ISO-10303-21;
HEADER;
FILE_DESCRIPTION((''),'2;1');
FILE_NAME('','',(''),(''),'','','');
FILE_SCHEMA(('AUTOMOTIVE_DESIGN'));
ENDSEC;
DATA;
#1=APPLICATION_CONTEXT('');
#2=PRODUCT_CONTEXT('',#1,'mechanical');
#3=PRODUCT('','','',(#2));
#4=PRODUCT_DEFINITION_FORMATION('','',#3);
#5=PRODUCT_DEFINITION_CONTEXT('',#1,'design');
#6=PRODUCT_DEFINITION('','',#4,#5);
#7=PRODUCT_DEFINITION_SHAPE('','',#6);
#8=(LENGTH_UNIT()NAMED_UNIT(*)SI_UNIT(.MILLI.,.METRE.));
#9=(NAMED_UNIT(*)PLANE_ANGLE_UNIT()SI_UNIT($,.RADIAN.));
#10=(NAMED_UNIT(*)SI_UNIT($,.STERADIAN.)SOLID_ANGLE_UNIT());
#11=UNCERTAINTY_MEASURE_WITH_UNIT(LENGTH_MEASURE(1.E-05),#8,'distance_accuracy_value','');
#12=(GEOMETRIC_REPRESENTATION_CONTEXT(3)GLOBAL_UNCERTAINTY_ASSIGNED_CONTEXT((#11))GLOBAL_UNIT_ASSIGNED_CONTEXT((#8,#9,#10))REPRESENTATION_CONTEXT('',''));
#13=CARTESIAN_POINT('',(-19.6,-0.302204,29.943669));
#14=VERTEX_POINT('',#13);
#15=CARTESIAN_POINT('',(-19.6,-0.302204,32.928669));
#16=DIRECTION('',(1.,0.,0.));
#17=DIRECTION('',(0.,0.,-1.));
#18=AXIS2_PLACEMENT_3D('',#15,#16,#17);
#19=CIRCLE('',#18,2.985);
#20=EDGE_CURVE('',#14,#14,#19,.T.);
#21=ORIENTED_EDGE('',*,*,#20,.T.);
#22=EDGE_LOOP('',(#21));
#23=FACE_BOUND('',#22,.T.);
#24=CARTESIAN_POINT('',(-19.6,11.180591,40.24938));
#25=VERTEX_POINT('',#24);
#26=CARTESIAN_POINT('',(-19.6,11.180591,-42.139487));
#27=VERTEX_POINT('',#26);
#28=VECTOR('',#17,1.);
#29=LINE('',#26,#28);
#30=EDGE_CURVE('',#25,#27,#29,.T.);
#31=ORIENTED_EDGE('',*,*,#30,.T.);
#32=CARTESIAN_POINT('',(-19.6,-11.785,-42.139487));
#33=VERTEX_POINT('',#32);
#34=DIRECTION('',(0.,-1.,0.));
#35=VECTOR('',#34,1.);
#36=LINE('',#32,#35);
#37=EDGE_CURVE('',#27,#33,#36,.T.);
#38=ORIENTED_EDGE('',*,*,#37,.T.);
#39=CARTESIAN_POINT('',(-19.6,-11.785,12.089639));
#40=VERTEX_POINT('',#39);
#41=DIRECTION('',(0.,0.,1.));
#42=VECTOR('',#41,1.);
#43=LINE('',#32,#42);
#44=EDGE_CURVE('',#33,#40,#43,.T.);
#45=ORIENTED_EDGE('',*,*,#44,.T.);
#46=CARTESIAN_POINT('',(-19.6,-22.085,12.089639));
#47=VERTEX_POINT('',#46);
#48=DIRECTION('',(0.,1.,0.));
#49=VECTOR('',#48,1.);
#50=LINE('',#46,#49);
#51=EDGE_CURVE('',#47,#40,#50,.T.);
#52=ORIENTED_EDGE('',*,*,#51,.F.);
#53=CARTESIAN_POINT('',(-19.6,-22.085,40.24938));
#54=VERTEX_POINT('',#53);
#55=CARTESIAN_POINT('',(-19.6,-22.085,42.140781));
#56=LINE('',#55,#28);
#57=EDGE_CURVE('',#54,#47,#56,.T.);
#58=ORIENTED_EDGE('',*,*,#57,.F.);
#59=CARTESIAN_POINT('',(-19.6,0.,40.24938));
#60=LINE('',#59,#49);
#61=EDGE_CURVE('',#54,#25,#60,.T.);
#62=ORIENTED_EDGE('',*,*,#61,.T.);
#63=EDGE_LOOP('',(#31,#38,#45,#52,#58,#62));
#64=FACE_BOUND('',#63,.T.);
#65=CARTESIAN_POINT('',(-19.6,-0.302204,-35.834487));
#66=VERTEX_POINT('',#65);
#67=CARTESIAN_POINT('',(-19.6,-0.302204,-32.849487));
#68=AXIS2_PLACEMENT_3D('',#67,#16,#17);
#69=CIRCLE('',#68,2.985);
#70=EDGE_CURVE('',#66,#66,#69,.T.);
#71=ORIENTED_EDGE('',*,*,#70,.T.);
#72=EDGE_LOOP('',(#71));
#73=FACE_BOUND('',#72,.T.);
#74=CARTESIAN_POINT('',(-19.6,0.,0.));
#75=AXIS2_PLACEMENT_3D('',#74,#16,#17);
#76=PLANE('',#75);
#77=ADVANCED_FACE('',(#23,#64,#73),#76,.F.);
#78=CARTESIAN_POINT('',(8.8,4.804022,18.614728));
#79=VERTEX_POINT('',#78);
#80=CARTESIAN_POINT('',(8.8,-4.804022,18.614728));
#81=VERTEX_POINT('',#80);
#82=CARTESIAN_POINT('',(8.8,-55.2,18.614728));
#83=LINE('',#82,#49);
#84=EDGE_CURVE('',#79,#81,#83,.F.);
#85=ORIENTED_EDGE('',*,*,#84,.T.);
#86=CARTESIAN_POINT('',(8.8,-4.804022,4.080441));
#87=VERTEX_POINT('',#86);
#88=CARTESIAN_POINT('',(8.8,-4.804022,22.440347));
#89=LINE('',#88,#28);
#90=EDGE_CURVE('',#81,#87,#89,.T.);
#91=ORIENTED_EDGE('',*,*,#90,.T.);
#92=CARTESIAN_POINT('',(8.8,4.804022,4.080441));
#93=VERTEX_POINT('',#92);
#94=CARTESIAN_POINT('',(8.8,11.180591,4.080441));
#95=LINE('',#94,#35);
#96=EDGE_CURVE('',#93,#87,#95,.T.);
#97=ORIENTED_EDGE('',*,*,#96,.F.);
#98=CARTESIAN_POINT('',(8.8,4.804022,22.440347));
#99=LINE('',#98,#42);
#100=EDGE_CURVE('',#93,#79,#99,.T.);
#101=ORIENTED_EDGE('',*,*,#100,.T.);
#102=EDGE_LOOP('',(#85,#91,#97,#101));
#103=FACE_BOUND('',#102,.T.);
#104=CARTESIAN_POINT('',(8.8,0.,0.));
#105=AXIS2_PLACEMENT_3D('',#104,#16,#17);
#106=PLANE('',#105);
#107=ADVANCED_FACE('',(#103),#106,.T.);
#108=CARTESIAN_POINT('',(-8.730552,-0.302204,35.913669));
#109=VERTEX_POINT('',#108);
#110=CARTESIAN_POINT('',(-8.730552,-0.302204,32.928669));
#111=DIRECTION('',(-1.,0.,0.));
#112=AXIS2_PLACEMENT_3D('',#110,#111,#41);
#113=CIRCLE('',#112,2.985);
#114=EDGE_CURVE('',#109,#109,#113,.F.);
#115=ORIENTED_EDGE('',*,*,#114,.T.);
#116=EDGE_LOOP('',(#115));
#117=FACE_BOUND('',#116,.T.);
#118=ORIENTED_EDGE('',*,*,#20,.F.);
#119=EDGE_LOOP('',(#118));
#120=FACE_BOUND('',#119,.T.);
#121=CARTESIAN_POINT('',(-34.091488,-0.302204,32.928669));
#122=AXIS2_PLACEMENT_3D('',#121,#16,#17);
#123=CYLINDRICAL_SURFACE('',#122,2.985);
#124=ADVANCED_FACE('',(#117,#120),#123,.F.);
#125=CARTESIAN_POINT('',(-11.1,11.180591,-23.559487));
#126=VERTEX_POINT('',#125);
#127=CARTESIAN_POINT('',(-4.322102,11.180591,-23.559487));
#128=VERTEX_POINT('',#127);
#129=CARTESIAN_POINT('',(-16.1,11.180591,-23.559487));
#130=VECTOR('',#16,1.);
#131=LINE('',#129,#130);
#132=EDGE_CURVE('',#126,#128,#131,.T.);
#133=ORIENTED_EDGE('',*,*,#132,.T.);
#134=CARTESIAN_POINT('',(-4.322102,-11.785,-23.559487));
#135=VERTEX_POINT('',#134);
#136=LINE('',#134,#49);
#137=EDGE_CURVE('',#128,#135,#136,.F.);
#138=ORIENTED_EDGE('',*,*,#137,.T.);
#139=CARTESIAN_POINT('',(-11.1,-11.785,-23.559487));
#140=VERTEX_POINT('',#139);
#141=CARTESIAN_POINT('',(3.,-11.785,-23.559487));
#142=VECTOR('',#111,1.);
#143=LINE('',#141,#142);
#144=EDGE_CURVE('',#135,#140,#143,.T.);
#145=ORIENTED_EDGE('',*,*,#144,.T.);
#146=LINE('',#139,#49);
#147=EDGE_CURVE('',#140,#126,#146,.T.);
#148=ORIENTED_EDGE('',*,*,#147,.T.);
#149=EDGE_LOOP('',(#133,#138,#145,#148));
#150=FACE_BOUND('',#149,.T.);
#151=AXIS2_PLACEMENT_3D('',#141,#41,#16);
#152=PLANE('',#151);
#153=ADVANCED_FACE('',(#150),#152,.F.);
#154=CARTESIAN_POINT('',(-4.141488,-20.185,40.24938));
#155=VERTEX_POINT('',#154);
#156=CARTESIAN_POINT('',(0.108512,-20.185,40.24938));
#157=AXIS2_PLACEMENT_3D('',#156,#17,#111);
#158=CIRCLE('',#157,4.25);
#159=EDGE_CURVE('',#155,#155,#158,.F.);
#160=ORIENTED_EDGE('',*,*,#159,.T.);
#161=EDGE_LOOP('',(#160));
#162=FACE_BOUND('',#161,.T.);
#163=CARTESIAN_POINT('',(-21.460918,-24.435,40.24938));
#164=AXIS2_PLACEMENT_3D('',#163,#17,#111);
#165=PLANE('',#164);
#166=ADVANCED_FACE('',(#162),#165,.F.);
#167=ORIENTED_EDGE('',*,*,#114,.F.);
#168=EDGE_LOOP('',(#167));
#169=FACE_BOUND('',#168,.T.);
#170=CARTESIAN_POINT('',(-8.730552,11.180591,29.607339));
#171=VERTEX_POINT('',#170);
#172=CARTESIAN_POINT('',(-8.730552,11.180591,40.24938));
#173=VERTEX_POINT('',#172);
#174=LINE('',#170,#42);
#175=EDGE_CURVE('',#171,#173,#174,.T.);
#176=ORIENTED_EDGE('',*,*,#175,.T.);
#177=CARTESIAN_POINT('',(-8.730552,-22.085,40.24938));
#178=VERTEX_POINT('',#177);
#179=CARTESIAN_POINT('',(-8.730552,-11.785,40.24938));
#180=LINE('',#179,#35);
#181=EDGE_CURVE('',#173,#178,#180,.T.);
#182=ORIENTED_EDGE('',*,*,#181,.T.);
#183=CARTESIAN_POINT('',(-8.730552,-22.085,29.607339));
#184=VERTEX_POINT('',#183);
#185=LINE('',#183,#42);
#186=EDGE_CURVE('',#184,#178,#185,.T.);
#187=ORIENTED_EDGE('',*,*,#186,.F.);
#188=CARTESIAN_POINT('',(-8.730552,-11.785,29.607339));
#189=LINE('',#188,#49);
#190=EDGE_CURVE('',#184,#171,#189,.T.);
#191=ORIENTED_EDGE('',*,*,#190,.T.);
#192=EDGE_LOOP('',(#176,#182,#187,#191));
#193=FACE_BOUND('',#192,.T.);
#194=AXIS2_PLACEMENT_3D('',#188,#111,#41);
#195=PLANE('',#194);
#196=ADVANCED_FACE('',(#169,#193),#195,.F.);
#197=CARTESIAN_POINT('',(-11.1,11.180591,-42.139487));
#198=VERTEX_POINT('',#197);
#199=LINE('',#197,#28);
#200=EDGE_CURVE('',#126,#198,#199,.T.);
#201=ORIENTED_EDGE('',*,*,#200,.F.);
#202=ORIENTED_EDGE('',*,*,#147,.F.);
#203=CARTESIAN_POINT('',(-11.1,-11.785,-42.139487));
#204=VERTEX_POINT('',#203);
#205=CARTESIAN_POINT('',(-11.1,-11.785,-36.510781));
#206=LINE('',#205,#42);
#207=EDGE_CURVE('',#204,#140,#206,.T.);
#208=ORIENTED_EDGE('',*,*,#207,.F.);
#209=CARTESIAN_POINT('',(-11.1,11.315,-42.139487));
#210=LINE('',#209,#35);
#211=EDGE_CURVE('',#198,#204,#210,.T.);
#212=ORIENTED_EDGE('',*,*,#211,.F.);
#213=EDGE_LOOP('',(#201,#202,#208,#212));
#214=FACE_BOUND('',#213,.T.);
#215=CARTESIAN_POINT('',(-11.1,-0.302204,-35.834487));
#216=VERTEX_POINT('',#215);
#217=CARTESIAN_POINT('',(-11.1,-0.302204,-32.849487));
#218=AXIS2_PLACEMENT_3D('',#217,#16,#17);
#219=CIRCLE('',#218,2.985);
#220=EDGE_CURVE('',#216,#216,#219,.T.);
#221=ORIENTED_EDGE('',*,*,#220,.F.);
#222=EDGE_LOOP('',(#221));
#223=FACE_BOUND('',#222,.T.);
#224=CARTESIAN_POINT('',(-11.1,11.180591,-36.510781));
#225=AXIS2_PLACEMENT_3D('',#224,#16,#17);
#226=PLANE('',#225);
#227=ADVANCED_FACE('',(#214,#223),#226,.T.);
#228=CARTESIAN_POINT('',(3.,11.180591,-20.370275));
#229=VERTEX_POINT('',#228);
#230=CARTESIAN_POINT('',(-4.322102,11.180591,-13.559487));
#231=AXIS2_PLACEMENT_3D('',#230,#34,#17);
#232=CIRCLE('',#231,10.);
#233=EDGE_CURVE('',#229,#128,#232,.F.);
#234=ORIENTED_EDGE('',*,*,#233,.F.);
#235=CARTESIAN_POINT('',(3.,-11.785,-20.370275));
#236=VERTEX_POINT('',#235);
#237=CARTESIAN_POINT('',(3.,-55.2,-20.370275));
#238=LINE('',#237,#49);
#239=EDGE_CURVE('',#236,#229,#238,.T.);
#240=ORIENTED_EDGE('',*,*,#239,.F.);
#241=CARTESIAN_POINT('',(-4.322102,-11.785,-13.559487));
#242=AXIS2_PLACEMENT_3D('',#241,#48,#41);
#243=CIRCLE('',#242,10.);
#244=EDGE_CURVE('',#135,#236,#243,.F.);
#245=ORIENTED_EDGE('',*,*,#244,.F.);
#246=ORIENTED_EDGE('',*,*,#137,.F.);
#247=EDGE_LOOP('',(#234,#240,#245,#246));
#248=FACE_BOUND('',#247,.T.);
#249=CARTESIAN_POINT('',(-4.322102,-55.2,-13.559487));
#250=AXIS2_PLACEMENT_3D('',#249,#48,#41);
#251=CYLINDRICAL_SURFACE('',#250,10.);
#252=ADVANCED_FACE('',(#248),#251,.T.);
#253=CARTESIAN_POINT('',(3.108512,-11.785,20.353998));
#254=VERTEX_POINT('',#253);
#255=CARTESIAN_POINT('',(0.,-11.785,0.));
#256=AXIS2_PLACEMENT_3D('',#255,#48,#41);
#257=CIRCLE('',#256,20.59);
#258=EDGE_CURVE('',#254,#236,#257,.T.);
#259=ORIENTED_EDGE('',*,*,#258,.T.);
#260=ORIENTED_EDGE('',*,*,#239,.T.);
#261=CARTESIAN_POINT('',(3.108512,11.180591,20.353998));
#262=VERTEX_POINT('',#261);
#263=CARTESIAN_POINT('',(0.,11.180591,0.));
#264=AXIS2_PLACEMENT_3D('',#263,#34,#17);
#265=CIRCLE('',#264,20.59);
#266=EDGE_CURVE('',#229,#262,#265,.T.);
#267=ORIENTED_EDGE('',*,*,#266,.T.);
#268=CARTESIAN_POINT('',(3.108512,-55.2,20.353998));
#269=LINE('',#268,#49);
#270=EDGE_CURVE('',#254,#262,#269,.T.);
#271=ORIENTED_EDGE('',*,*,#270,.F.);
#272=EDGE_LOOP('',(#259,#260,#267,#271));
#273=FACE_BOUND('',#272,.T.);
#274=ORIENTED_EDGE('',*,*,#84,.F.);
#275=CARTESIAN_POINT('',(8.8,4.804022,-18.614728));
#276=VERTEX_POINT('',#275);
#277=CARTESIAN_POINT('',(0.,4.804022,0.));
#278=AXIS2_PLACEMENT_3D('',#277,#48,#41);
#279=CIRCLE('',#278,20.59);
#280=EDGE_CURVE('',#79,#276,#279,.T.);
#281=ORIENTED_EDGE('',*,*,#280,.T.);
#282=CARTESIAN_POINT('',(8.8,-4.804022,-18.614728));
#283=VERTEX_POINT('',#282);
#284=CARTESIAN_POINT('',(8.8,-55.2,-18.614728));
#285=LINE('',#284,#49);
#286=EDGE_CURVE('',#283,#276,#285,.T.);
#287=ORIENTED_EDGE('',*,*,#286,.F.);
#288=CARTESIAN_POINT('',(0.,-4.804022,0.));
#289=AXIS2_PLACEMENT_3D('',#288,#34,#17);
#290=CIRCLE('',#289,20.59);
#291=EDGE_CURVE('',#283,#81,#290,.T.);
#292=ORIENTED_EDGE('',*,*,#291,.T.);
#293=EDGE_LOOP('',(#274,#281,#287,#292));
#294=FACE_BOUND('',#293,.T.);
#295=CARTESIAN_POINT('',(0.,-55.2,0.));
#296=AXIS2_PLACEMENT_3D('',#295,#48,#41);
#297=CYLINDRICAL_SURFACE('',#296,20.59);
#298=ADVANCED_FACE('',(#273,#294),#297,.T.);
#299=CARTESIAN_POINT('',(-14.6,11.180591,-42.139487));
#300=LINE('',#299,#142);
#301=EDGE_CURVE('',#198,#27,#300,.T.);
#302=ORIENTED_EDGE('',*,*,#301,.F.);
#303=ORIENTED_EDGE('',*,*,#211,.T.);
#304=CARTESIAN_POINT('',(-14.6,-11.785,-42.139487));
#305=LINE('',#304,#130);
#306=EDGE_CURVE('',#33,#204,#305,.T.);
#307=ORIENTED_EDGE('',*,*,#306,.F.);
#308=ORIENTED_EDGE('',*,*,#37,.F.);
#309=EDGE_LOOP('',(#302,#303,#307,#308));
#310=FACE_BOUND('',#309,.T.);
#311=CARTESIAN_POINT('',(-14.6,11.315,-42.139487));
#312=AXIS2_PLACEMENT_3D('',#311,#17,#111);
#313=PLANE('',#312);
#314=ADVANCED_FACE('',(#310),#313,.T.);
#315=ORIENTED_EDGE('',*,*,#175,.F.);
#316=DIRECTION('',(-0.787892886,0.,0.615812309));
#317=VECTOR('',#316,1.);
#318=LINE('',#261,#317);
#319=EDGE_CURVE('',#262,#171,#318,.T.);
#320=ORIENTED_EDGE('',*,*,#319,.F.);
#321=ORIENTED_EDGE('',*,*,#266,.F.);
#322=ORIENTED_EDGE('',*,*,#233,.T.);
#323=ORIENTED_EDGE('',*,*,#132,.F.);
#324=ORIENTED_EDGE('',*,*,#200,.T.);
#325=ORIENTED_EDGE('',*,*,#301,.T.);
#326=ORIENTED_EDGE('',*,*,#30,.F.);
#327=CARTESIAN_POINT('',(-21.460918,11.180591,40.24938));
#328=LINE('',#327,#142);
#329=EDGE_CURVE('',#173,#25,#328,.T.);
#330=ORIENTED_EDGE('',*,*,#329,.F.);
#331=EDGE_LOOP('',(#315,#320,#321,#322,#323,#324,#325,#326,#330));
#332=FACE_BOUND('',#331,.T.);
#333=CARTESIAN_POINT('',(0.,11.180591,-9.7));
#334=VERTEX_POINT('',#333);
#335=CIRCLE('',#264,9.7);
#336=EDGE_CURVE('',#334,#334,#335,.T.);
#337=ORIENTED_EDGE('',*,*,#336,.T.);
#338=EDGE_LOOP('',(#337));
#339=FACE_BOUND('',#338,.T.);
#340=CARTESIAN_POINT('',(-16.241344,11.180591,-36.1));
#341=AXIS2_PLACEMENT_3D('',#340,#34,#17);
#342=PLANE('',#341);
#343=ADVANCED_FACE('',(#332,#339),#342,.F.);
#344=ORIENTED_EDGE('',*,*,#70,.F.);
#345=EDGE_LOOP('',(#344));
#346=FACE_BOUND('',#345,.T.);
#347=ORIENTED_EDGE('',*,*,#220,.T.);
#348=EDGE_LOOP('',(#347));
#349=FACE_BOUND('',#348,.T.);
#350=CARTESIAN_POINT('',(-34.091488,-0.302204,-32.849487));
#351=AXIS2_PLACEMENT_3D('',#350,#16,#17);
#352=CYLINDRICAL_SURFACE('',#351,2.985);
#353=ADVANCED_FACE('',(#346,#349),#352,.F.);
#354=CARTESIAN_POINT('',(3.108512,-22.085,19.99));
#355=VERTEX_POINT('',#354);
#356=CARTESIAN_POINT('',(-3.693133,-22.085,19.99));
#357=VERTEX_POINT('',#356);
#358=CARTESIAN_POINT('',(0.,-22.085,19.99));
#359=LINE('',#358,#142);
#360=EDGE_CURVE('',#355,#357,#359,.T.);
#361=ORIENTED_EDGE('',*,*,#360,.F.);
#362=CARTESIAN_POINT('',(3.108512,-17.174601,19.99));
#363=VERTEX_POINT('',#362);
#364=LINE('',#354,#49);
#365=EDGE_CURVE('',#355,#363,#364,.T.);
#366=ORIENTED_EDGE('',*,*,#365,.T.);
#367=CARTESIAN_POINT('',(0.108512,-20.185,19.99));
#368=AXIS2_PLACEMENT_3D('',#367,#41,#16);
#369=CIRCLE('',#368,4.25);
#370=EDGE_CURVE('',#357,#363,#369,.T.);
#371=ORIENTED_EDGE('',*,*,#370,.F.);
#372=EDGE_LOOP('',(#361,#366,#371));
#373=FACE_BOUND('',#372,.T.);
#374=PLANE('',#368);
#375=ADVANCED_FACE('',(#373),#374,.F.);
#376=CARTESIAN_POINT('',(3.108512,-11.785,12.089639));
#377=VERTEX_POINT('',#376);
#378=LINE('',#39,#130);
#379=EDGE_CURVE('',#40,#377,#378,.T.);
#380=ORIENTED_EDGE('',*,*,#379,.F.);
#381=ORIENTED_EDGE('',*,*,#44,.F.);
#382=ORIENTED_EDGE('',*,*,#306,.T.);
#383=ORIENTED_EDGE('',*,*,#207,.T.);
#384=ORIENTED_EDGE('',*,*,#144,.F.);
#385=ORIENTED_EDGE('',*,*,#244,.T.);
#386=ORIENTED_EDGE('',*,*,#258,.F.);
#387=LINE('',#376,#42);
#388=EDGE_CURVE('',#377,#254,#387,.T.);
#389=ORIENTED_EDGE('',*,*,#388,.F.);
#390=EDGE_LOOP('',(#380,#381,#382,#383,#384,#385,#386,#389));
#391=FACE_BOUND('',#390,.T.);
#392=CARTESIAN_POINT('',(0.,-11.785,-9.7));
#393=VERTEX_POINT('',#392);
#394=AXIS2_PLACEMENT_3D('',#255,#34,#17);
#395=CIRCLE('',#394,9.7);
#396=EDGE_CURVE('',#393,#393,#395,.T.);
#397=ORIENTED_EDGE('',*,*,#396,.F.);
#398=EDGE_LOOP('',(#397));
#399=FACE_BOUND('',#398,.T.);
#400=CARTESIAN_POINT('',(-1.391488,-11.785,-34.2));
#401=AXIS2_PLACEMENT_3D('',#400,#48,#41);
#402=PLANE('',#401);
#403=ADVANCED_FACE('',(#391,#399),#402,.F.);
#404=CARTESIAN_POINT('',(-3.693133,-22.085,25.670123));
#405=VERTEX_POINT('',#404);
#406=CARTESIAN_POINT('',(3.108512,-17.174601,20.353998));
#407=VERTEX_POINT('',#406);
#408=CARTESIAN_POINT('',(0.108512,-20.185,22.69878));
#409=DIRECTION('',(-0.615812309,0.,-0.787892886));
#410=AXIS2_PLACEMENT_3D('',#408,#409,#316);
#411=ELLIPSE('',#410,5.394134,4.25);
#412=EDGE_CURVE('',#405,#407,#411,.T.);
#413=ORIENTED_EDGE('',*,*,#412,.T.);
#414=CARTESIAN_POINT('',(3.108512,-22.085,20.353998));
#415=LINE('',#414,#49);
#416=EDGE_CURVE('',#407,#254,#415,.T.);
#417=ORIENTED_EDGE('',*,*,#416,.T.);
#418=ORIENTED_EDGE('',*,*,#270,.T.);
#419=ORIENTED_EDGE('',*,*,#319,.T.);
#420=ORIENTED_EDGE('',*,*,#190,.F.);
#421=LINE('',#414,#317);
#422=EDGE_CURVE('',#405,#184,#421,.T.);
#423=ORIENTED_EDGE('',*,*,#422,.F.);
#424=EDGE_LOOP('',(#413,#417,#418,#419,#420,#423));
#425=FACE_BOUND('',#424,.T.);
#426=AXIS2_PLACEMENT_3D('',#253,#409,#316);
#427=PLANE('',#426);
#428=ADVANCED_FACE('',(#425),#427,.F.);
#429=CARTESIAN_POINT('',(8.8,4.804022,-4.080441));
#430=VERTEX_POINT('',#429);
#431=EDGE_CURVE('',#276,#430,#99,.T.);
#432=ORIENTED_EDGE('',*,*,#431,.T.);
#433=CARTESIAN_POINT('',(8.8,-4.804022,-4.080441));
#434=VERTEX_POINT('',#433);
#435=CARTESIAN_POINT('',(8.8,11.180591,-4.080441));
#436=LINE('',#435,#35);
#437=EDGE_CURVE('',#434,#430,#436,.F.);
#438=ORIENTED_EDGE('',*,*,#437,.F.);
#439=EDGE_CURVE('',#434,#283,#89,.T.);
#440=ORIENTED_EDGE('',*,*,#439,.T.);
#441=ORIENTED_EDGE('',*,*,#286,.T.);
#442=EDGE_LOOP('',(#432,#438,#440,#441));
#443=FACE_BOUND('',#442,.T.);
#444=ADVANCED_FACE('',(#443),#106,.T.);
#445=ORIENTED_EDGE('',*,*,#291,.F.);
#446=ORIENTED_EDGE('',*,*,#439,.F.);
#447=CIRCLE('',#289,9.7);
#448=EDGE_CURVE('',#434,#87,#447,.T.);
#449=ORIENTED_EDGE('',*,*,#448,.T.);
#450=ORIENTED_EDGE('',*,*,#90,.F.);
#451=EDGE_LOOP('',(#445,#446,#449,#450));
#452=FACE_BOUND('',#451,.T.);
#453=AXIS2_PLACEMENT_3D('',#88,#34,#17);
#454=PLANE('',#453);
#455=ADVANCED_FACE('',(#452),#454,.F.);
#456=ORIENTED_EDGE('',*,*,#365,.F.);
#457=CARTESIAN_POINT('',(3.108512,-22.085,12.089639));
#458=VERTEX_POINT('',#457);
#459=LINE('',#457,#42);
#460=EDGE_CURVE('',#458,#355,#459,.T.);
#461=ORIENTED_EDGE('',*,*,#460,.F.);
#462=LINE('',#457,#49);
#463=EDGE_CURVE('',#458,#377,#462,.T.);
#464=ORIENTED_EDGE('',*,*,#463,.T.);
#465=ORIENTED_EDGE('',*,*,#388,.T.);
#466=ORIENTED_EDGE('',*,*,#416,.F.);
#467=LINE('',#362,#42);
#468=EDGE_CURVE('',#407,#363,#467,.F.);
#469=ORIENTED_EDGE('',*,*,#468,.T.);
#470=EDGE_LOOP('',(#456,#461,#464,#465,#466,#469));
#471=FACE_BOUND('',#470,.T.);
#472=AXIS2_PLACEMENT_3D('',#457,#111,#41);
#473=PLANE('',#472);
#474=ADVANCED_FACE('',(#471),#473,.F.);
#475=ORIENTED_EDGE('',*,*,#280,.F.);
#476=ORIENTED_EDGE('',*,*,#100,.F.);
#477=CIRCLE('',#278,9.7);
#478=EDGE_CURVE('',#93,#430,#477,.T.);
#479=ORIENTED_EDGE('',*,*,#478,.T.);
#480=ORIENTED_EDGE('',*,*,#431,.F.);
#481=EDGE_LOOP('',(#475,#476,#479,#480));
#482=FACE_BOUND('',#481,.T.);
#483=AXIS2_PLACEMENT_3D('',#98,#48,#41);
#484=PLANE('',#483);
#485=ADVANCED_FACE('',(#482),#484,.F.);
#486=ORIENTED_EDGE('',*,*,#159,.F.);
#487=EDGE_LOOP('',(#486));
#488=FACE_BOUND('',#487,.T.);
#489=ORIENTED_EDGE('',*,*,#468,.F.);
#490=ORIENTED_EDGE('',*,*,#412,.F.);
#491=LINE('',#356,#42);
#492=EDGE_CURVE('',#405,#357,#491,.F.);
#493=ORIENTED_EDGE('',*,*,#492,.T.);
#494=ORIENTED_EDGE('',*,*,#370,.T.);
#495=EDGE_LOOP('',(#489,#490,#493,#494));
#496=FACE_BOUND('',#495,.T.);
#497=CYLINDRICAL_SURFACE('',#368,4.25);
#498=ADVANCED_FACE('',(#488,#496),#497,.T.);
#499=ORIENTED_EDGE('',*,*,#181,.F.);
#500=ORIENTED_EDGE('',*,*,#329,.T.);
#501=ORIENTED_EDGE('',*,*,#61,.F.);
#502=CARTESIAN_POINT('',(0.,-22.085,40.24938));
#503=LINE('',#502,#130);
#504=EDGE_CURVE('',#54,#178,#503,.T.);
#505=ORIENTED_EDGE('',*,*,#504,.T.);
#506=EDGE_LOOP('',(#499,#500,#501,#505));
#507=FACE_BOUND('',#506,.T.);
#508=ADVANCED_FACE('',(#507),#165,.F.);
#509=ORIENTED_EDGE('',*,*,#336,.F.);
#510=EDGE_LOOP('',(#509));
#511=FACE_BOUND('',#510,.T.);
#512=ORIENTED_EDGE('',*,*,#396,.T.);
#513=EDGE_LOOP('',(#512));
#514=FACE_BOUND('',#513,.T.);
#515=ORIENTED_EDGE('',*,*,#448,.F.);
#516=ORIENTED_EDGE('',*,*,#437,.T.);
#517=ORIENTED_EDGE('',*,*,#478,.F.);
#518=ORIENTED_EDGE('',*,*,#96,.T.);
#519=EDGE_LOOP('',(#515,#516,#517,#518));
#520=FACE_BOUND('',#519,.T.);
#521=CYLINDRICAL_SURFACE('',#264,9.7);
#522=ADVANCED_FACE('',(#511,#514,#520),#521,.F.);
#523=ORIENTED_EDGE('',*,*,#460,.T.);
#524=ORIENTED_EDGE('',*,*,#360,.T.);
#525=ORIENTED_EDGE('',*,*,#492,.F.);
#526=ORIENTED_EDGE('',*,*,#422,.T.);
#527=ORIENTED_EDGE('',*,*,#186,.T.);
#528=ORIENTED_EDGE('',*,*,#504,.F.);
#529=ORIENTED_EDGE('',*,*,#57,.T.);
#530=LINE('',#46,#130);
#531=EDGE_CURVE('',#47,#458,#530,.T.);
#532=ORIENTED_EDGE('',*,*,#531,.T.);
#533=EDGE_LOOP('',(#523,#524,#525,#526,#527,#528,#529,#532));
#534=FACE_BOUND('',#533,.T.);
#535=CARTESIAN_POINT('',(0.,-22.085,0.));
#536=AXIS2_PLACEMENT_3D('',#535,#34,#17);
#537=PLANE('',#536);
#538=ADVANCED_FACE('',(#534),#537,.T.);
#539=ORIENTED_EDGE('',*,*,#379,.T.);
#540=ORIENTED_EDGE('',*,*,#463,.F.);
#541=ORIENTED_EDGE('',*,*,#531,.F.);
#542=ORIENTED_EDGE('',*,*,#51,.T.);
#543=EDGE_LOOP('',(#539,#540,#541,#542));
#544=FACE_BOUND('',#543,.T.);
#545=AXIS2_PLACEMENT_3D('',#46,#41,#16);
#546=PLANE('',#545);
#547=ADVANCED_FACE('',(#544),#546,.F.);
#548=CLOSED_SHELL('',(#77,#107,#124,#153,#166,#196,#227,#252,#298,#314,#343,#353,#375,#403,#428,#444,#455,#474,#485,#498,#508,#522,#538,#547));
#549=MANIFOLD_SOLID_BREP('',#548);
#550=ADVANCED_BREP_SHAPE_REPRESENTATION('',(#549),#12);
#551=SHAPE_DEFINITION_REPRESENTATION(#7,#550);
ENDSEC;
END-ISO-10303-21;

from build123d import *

# Parameters (mm, degrees)
SKETCH_1_R                = 20.68
SKETCH_1_R_2              = 9.68
EXTRUDE_1_DEPTH           = 116.68
SKETCH_11_W               = 27
SKETCH_11_H               = 150
CUT_EXTRUDE_3_DEPTH       = 40
SKETCH_13_W               = 10
SKETCH_13_H               = 128.345013401
CUT_EXTRUDE_7_DEPTH       = 126.614916312
SKETCH_15_W               = 8
SKETCH_15_H               = 68.68
CUT_EXTRUDE_9_DEPTH       = 48
SKETCH_16_W               = 15.549431524
SKETCH_16_H               = 20
SKETCH_16_W_2             = 15.459431524
EXTRUDE_4_DEPTH           = 19.2
SKETCH_17_W               = 19.20851187
SKETCH_17_H               = 14.03
CUT_EXTRUDE_10_DEPTH      = 20.2
SKETCH_18_R               = 9.59
CUT_EXTRUDE_11_DEPTH      = 121.289430957
SKETCH_21_R               = 2.985
CUT_EXTRUDE_12_DEPTH      = 55.2
EXTRUDE_START             = 55.2
SKETCH_24_R               = 20.59
SKETCH_24_R_2             = 9.59
EXTRUDE_2_DEPTH           = 55.2
CUT_EXTRUDE_13_DEPTH      = 55.2
SKETCH_26_W               = 10.00851187
SKETCH_26_H               = 41.68
CUT_EXTRUDE_15_DEPTH      = 55.2
SKETCH_27_W               = 10
SKETCH_27_H               = 40
CUT_EXTRUDE_16_DEPTH      = 55.2
SKETCH_28_W               = 44.880694938
SKETCH_28_H               = 9.608044066
CUT_EXTRUDE_17_DEPTH      = 12.2
SKETCH_35_W               = 13.53
SKETCH_35_H               = 20
EXTRUDE_10_DEPTH          = 15
EXTRUDE_11_DEPTH          = 15
SKETCH_37_W               = 9
SKETCH_37_H               = 20
EXTRUDE_12_DEPTH          = 20
SKETCH_38_W               = 9
SKETCH_38_H               = 20
EXTRUDE_13_DEPTH          = 20
SKETCH_42_R               = 2.985
CUT_EXTRUDE_21_DEPTH      = 20
CUT_EXTRUDE_23_DEPTH      = 138.235841092
SKETCH_45_W               = 3
SKETCH_45_H               = 20
EXTRUDE_14_DEPTH          = 30
SKETCH_46_W               = 3
SKETCH_46_H               = 20
EXTRUDE_15_DEPTH          = 30
SKETCH_47_W               = 33.078221107
SKETCH_47_H               = 20
EXTRUDE_16_DEPTH          = 50
SKETCH_48_W               = 30
SKETCH_48_H               = 20
EXTRUDE_17_DEPTH          = 50
SKETCH_50_W               = 50
SKETCH_50_H               = 20
EXTRUDE_18_DEPTH          = 1
SKETCH_51_W               = 50
SKETCH_51_H               = 20
EXTRUDE_19_DEPTH          = 1
SKETCH_52_W               = 53
SKETCH_52_H               = 14
CUT_EXTRUDE_24_DEPTH      = 151.972575738
SKETCH_53_W               = 53
SKETCH_53_H               = 14
CUT_EXTRUDE_25_DEPTH      = 151.942387436
SKETCH_54_W               = 40
SKETCH_54_H               = 73.27
CUT_EXTRUDE_26_DEPTH      = 147.866192927
SKETCH_56_W               = 13.00851187
SKETCH_56_H               = 20
EXTRUDE_21_DEPTH          = 3.08
SKETCH_60_W               = 6.504255935
SKETCH_60_H               = 76.35
CUT_EXTRUDE_30_DEPTH      = 137.106994034
CUT_EXTRUDE_32_DEPTH      = 20
SKETCH_64_W               = 16.20851187
SKETCH_64_H               = 0.09
EXTRUDE_22_DEPTH          = 20
SKETCH_65_W               = 3.495744065
SKETCH_65_H               = 3.26
CUT_EXTRUDE_33_DEPTH      = 137.057988464
SKETCH_66_W               = 3.495744065
SKETCH_66_H               = 1.776778893
SKETCH_66_W_2             = 3.503635083
SKETCH_66_H_2             = 1.775
EXTRUDE_23_DEPTH          = 20.2
SKETCH_68_W               = 6.504255935
SKETCH_68_H               = 3.66
CUT_EXTRUDE_34_DEPTH      = 20
SKETCH_69_R               = 2.985
CUT_EXTRUDE_35_DEPTH      = 126.598983893
SKETCH_70_R               = 2.985
CUT_EXTRUDE_36_DEPTH      = 132.360728238
SKETCH_71_W               = 38.005321573
SKETCH_71_H               = 111.965885132
CUT_EXTRUDE_37_DEPTH      = 147.475577566
SKETCH_72_R               = 9.7
CUT_EXTRUDE_38_DEPTH      = 38.185254838
CUT_EXTRUDE_START         = -22
SKETCH_77_R               = 30.59
SKETCH_77_R_2             = 20.59
CUT_EXTRUDE_2_DEPTH       = 22
SKETCH_78_W               = 34.816185151
SKETCH_78_H               = 22.96559116
EXTRUDE_26_DEPTH          = 0.1
SKETCH_80_W               = 2.900031179
SKETCH_80_H               = 6.148706656
EXTRUDE_28_DEPTH          = 23.1
SKETCH_81_W               = 6.148706656
SKETCH_81_H               = 23.1
EXTRUDE_29_DEPTH          = 14.1
SKETCH_82_W               = 6.148706656
SKETCH_82_H               = 0.13440884
CUT_EXTRUDE_39_DEPTH      = 19.1
SKETCH_83_W               = 2.900031179
SKETCH_83_H               = 22.96559116
EXTRUDE_30_DEPTH          = 19.1
FILLET_1_R                = 10
SKETCH_84_W               = 3.5
SKETCH_84_H               = 19.1
EXTRUDE_31_DEPTH          = 23.1
SKETCH_85_W               = 3.5
SKETCH_85_H               = 0.52
CUT_EXTRUDE_40_DEPTH      = 48.860163141
SKETCH_86_W               = 3.5
SKETCH_86_H               = 22.96559116
EXTRUDE_32_DEPTH          = 62.1
SKETCH_87_W               = 3.60851187
SKETCH_87_H               = 34.816185151
CUT_EXTRUDE_41_DEPTH      = 62.1
SKETCH_89_W               = 0.10851187
SKETCH_89_H               = 6.15
EXTRUDE_33_DEPTH          = 23.1
EXTRUDE_34_DEPTH          = 22.1
SKETCH_91_W               = 0.971561636
SKETCH_91_H               = 22.96559116
CUT_EXTRUDE_42_DEPTH      = 22.1
SKETCH_95_W               = 6.15
SKETCH_95_H               = 22.96559116
EXTRUDE_35_DEPTH          = 14.1
FILLET_2_R                = 10
SKETCH_96_W               = 3.60851187
SKETCH_96_H               = 2.548438364
CUT_EXTRUDE_43_DEPTH      = 55.35700885
SKETCH_97_W               = 3.5
SKETCH_97_H               = 6.148706656
EXTRUDE_36_DEPTH          = 23.1
CUT_EXTRUDE_44_DEPTH      = 23.1
SKETCH_99_W               = 6.15
SKETCH_99_H               = 0.13440884
CUT_EXTRUDE_45_DEPTH      = 23.1
SKETCH_101_R              = 2.985
CUT_EXTRUDE_46_DEPTH      = 23.1
SKETCH_103_W              = 3.60851187
SKETCH_103_H              = 0.54
CUT_EXTRUDE_49_DEPTH      = 53.222714265
SKETCH_104_W              = 3.60851187
SKETCH_104_H              = 0.54
CUT_EXTRUDE_50_DEPTH      = 53.222714265
SKETCH_105_W              = 14.1
SKETCH_105_H              = 22.96559116
EXTRUDE_37_DEPTH          = 30
SKETCH_106_W              = 8.260608777
SKETCH_106_H              = 22.96559116
CUT_EXTRUDE_52_DEPTH      = 61.301547389
SKETCH_107_R              = 2.985
CUT_EXTRUDE_53_DEPTH      = 54.964080882
SKETCH_108_W              = 3.60851187
SKETCH_108_H              = 22.96559116
EXTRUDE_38_DEPTH          = 40
SKETCH_109_W              = 84.280268292
SKETCH_109_H              = 22.96559116
EXTRUDE_39_DEPTH          = 5
SKETCH_110_R              = 2.985
CUT_EXTRUDE_54_DEPTH      = 57.152183688
SKETCH_111_R              = 2.985
CUT_EXTRUDE_55_DEPTH      = 50.299169813
CUT_EXTRUDE_56_DEPTH      = 53.222714265
EXTRUDE_40_DEPTH          = 10.3
EXTRUDE_44_DEPTH          = 0.01
EXTRUDE_44_DEPTH_BACK     = 30.01
SKETCH_120_R              = 4.25
CUT_EXTRUDE_58_DEPTH      = 60.346587307
CUT_EXTRUDE_58_DEPTH_BACK = 60.346587307
SKETCH_121_W              = 49.202417837
SKETCH_121_H              = 14.707819526


with BuildPart() as part:
    # 草圖1 → 伸長-薄件1 (new body)
    with BuildSketch(Plane(origin=(0, 0, 0), x_dir=(1, 0, 0), z_dir=(0, 1, 0))):
        Circle(SKETCH_1_R)
        Circle(SKETCH_1_R_2, mode=Mode.SUBTRACT)
    extrude(amount=EXTRUDE_1_DEPTH)

    # 草圖11 → 除料-伸長3 (cut)
    with BuildSketch(Plane(origin=(0, 116.68, 0), x_dir=(1, 0, 0), z_dir=(0, 1, 0))):
        with Locations((21.70851187, -44.235815192)):
            Rectangle(SKETCH_11_W, SKETCH_11_H)
    extrude(amount=-CUT_EXTRUDE_3_DEPTH, mode=Mode.SUBTRACT)

    # 草圖13 → 除料-伸長7 (cut, through all)
    with BuildSketch(Plane.XY.offset(21)):
        with Locations((-16, 58.612182466)):
            Rectangle(SKETCH_13_W, SKETCH_13_H)
    extrude(amount=-CUT_EXTRUDE_7_DEPTH, mode=Mode.SUBTRACT)

    # 草圖15 → 除料-伸長9 (cut)
    with BuildSketch(Plane.XY.offset(21)):
        with Locations((-1.395744065, 52.34)):
            Rectangle(SKETCH_15_W, SKETCH_15_H)
    extrude(amount=-CUT_EXTRUDE_9_DEPTH, mode=Mode.SUBTRACT)

    # 草圖16 → 填料-伸長4 (add)
    with BuildSketch(Plane(origin=(8.20851187, 0, 0), x_dir=(0, 0, -1), z_dir=(1, 0, 0))):
        with Locations((12.905284238, 106.68)):
            Rectangle(SKETCH_16_W, SKETCH_16_H)
        with Locations((-12.860284238, 106.68)):
            Rectangle(SKETCH_16_W_2, SKETCH_16_H)
    extrude(amount=-EXTRUDE_4_DEPTH)

    # 草圖17 → 除料-伸長10 (cut)
    with BuildSketch(Plane(origin=(0, 116.68, 0), x_dir=(1, 0, 0), z_dir=(0, 1, 0))):
        with Locations((-1.395744065, -0.045)):
            Rectangle(SKETCH_17_W, SKETCH_17_H)
    extrude(amount=-CUT_EXTRUDE_10_DEPTH, mode=Mode.SUBTRACT)

    # 草圖18 → 除料-伸長11 (cut, through all)
    with BuildSketch(Plane.XZ):
        with Locations(Location((0, 0, 0), (0, 0, 90))):
            Circle(SKETCH_18_R)
    extrude(amount=-CUT_EXTRUDE_11_DEPTH, mode=Mode.SUBTRACT)

    # 草圖21 → 除料-伸長12 (cut)
    with BuildSketch(Plane(origin=(0, 0, -20.68), x_dir=(-1, 0, 0), z_dir=(0, 0, -1))):
        with Locations((1.39148813, 108.73)):
            Circle(SKETCH_21_R)
    extrude(amount=-CUT_EXTRUDE_12_DEPTH, mode=Mode.SUBTRACT)

    # 草圖24 → 伸長-薄件2 (add)
    with BuildSketch(Plane.XZ.offset(EXTRUDE_START)):
        Circle(SKETCH_24_R)
        Circle(SKETCH_24_R_2, mode=Mode.SUBTRACT)
    extrude(amount=-EXTRUDE_2_DEPTH)

    # 草圖25 → 除料-伸長13 (cut)
    with BuildSketch(Plane.XY.offset(21)):
        Polygon((-1.39148813, -11.785), (22.612379708, -11.785), (22.612379708, -63.873337429), (-22.749525245, -63.873337429), (-22.749525245, -11.785), align=None)
    extrude(amount=-CUT_EXTRUDE_13_DEPTH, mode=Mode.SUBTRACT)

    # 草圖26 → 除料-伸長15 (cut)
    with BuildSketch(Plane(origin=(0, 0, 0), x_dir=(1, 0, 0), z_dir=(0, 1, 0))):
        with Locations((-15.995744065, -0.16)):
            Rectangle(SKETCH_26_W, SKETCH_26_H)
    extrude(amount=-CUT_EXTRUDE_15_DEPTH, mode=Mode.SUBTRACT)

    # 草圖27 → 除料-伸長16 (cut)
    with BuildSketch(Plane(origin=(21, 0, 0), x_dir=(0, 0, -1), z_dir=(1, 0, 0))):
        with Locations((0, 41.68)):
            Rectangle(SKETCH_27_W, SKETCH_27_H)
    extrude(amount=-CUT_EXTRUDE_16_DEPTH, mode=Mode.SUBTRACT)

    # 草圖28 → 除料-伸長17 (cut)
    with BuildSketch(Plane(origin=(21, 0, 0), x_dir=(0, 0, -1), z_dir=(1, 0, 0))):
        Rectangle(SKETCH_28_W, SKETCH_28_H)
    extrude(amount=-CUT_EXTRUDE_17_DEPTH, mode=Mode.SUBTRACT)

    # 草圖35 → 填料-伸長10 (add)
    with BuildSketch(Plane.ZY.offset(10.99148813)):
        with Locations((13.825, 106.68)):
            Rectangle(SKETCH_35_W, SKETCH_35_H)
    extrude(amount=EXTRUDE_10_DEPTH)

    # 草圖36 → 填料-伸長11 (add)
    with BuildSketch(Plane.ZY.offset(10.99148813)):
        Polygon((-20.68, 116.68), (-6.97, 116.68), (-6.97, 96.48), (-20.68, 96.68), align=None)
    extrude(amount=EXTRUDE_11_DEPTH)

    # 草圖37 → 填料-伸長12 (add)
    with BuildSketch(Plane.XY.offset(20.59)):
        with Locations((-21.49148813, 106.68)):
            Rectangle(SKETCH_37_W, SKETCH_37_H)
    extrude(amount=EXTRUDE_12_DEPTH)

    # 草圖38 → 填料-伸長13 (add)
    with BuildSketch(Plane(origin=(0, 0, -20.68), x_dir=(-1, 0, 0), z_dir=(0, 0, -1))):
        with Locations((21.49148813, 106.68)):
            Rectangle(SKETCH_38_W, SKETCH_38_H)
    extrude(amount=EXTRUDE_13_DEPTH)

    # 草圖42 → 除料-伸長21 (cut)
    with BuildSketch(Plane(origin=(-16.99148813, 0, 0), x_dir=(0, 0, -1), z_dir=(1, 0, 0))):
        with Locations((30.68, 106.554418142)):
            Circle(SKETCH_42_R)
        with Locations((-30.395640125, 106.68)):
            Circle(SKETCH_42_R)
    extrude(amount=-CUT_EXTRUDE_21_DEPTH, mode=Mode.SUBTRACT)

    # 草圖43 → 除料-伸長23 (cut, through all)
    with BuildSketch(Plane(origin=(0, 116.68, 0), x_dir=(1, 0, 0), z_dir=(0, 1, 0))):
        Polygon((-11, 6.97), (-10.99148813, 20.68), (-10.99148813, 48.096794253), (-28.274756234, 48.096794253), (-28.274756234, -43.270506289), (-11, -43.270506289), align=None)
    extrude(amount=-CUT_EXTRUDE_23_DEPTH, mode=Mode.SUBTRACT)

    # 草圖45 → 填料-伸長14 (add)
    with BuildSketch(Plane.XY.offset(20.59)):
        with Locations((-9.5, 106.68)):
            Rectangle(SKETCH_45_W, SKETCH_45_H)
    extrude(amount=EXTRUDE_14_DEPTH)

    # 草圖46 → 填料-伸長15 (add)
    with BuildSketch(Plane(origin=(0, 0, -20.68), x_dir=(-1, 0, 0), z_dir=(0, 0, -1))):
        with Locations((9.49148813, 106.68)):
            Rectangle(SKETCH_46_W, SKETCH_46_H)
    extrude(amount=EXTRUDE_15_DEPTH)

    # 草圖47 → 填料-伸長16 (add)
    with BuildSketch(Plane.ZY.offset(11)):
        with Locations((34.050889447, 106.68)):
            Rectangle(SKETCH_47_W, SKETCH_47_H)
    extrude(amount=EXTRUDE_16_DEPTH)

    # 草圖48 → 填料-伸長17 (add)
    with BuildSketch(Plane.ZY.offset(10.99148813)):
        with Locations((-35.68, 106.68)):
            Rectangle(SKETCH_48_W, SKETCH_48_H)
    extrude(amount=EXTRUDE_17_DEPTH)

    # 草圖50 → 填料-伸長18 (add)
    with BuildSketch(Plane(origin=(0, 0, 17.511778893), x_dir=(-1, 0, 0), z_dir=(0, 0, -1))):
        with Locations((36, 106.68)):
            Rectangle(SKETCH_50_W, SKETCH_50_H)
    extrude(amount=EXTRUDE_18_DEPTH)

    # 草圖51 → 填料-伸長19 (add)
    with BuildSketch(Plane.XY.offset(-20.68)):
        with Locations((-35.99148813, 106.68)):
            Rectangle(SKETCH_51_W, SKETCH_51_H)
    extrude(amount=EXTRUDE_19_DEPTH)

    # 草圖52 → 除料-伸長24 (cut, through all)
    with BuildSketch(Plane(origin=(0, 116.68, 0), x_dir=(1, 0, 0), z_dir=(0, 1, 0))):
        with Locations((-34.49148813, 43.68)):
            Rectangle(SKETCH_52_W, SKETCH_52_H)
    extrude(amount=-CUT_EXTRUDE_24_DEPTH, mode=Mode.SUBTRACT)

    # 草圖53 → 除料-伸長25 (cut, through all)
    with BuildSketch(Plane(origin=(0, 116.68, 0), x_dir=(1, 0, 0), z_dir=(0, 1, 0))):
        with Locations((-34.5, -43.59)):
            Rectangle(SKETCH_53_W, SKETCH_53_H)
    extrude(amount=-CUT_EXTRUDE_25_DEPTH, mode=Mode.SUBTRACT)

    # 草圖54 → 除料-伸長26 (cut, through all)
    with BuildSketch(Plane(origin=(0, 116.68, 0), x_dir=(1, 0, 0), z_dir=(0, 1, 0))):
        with Locations((-41, 0.045)):
            Rectangle(SKETCH_54_W, SKETCH_54_H)
    extrude(amount=-CUT_EXTRUDE_26_DEPTH, mode=Mode.SUBTRACT)

    # 草圖56 → 填料-伸長21 (add)
    with BuildSketch(Plane(origin=(0, 0, -36.68), x_dir=(-1, 0, 0), z_dir=(0, 0, -1))):
        with Locations((14.495744065, 106.68)):
            Rectangle(SKETCH_56_W, SKETCH_56_H)
    extrude(amount=EXTRUDE_21_DEPTH)

    # 草圖60 → 除料-伸長30 (cut, through all)
    with BuildSketch(Plane(origin=(0, 116.68, 0), x_dir=(1, 0, 0), z_dir=(0, 1, 0))):
        with Locations((-17.747872032, 1.585)):
            Rectangle(SKETCH_60_W, SKETCH_60_H)
    extrude(amount=-CUT_EXTRUDE_30_DEPTH, mode=Mode.SUBTRACT)

    # 草圖61 → 除料-伸長32 (cut)
    with BuildSketch(Plane(origin=(0, 116.68, 0), x_dir=(1, 0, 0), z_dir=(0, 1, 0))):
        Polygon((1.92725193, -20.59), (1.92725193, -22.399121663), (-2.174190472, -21.421542421), (-2.174190472, -20.59), align=None)
    extrude(amount=-CUT_EXTRUDE_32_DEPTH, mode=Mode.SUBTRACT)

    # 草圖64 → 填料-伸長22 (add)
    with BuildSketch(Plane(origin=(0, 116.68, 0), x_dir=(1, 0, 0), z_dir=(0, 1, 0))):
        with Locations((0.104255935, -20.635)):
            Rectangle(SKETCH_64_W, SKETCH_64_H)
    extrude(amount=-EXTRUDE_22_DEPTH)

    # 草圖65 → 除料-伸長33 (cut, through all)
    with BuildSketch(Plane(origin=(0, 116.68, 0), x_dir=(1, 0, 0), z_dir=(0, 1, 0))):
        with Locations((-12.747872033, -18.141778893)):
            Rectangle(SKETCH_65_W, SKETCH_65_H)
    extrude(amount=-CUT_EXTRUDE_33_DEPTH, mode=Mode.SUBTRACT)

    # 草圖66 → 填料-伸長23 (add)
    with BuildSketch(Plane(origin=(0, 96.48, 0), x_dir=(1, 0, 0), z_dir=(0, 1, 0))):
        with Locations((-12.747872033, -18.883389447)):
            Rectangle(SKETCH_66_W, SKETCH_66_H)
        with Locations((-12.743926524, 18.7925)):
            Rectangle(SKETCH_66_W_2, SKETCH_66_H_2)
    extrude(amount=EXTRUDE_23_DEPTH)

    # 草圖68 → 除料-伸長34 (cut)
    with BuildSketch(Plane(origin=(0, 116.68, 0), x_dir=(1, 0, 0), z_dir=(0, 1, 0))):
        with Locations((-11.243616098, 37.93)):
            Rectangle(SKETCH_68_W, SKETCH_68_H)
    extrude(amount=-CUT_EXTRUDE_34_DEPTH, mode=Mode.SUBTRACT)

    # 草圖69 → 除料-伸長35 (cut, through all)
    with BuildSketch(Plane(origin=(-7.99148813, 0, 0), x_dir=(0, 0, -1), z_dir=(1, 0, 0))):
        with Locations((28.39, 106.68)):
            Circle(SKETCH_69_R)
        with Locations((-28.635, 106.68)):
            Circle(SKETCH_69_R)
    extrude(amount=-CUT_EXTRUDE_35_DEPTH, mode=Mode.SUBTRACT)

    # 草圖70 → 除料-伸長36 (cut, through all)
    with BuildSketch(Plane(origin=(0, 0, 20.59), x_dir=(-1, 0, 0), z_dir=(0, 0, -1))):
        with Locations((1.39148813, 108.73)):
            Circle(SKETCH_70_R)
    extrude(amount=-CUT_EXTRUDE_36_DEPTH, mode=Mode.SUBTRACT)

    # 草圖71 → 除料-伸長37 (cut, through all)
    with BuildSketch(Plane.XY.offset(50)):
        with Locations((2.76131712, 67.163533726)):
            Rectangle(SKETCH_71_W, SKETCH_71_H)
    extrude(amount=-CUT_EXTRUDE_37_DEPTH, mode=Mode.SUBTRACT)

    # 草圖72 → 除料-伸長38 (cut, through all)
    with BuildSketch(Plane.XZ.offset(11.785)):
        with Locations(Location((0, 0, 0), (0, 0, 270))):
            Circle(SKETCH_72_R)
    extrude(amount=-CUT_EXTRUDE_38_DEPTH, mode=Mode.SUBTRACT)

    # 草圖77 → 除料-伸長-薄件2 (cut)
    with BuildSketch(Plane(origin=(0, 11.18059116, 0), x_dir=(1, 0, 0), z_dir=(0, 1, 0)).offset(CUT_EXTRUDE_START)):
        Circle(SKETCH_77_R)
        Circle(SKETCH_77_R_2, mode=Mode.SUBTRACT)
    extrude(amount=CUT_EXTRUDE_2_DEPTH, mode=Mode.SUBTRACT)

    # 草圖78 → 填料-伸長26 (add)
    with BuildSketch(Plane.ZY.offset(11)):
        with Locations((-0.002688243, -0.30220442)):
            Rectangle(SKETCH_78_W, SKETCH_78_H)
    extrude(amount=EXTRUDE_26_DEPTH)



with BuildPart() as body_2:
    # 草圖80 → 填料-伸長28 (new body)
    with BuildSketch(Plane.XZ.offset(11.785)):
        with Locations((-12.55001559, -20.485134146)):
            Rectangle(SKETCH_80_W, SKETCH_80_H)
    extrude(amount=-EXTRUDE_28_DEPTH)


with BuildPart() as part_1:
    add(part.part)

    add(body_2.part)  # 填料-伸長29 merges body 2
    # 草圖81 → 填料-伸長29 (add)
    with BuildSketch(Plane(origin=(-11.1, 0, 0), x_dir=(0, 0, -1), z_dir=(1, 0, 0))):
        with Locations((20.485134146, -0.235)):
            Rectangle(SKETCH_81_W, SKETCH_81_H)
    extrude(amount=EXTRUDE_29_DEPTH)

    # 草圖82 → 除料-伸長39 (cut)
    with BuildSketch(Plane(origin=(3, 0, 0), x_dir=(0, 0, -1), z_dir=(1, 0, 0))):
        with Locations((20.485134146, 11.24779558)):
            Rectangle(SKETCH_82_W, SKETCH_82_H)
    extrude(amount=-CUT_EXTRUDE_39_DEPTH, mode=Mode.SUBTRACT)

    # 草圖83 → 填料-伸長30 (add)
    with BuildSketch(Plane.XY.offset(-17.410780818)):
        with Locations((-12.55001559, -0.30220442)):
            Rectangle(SKETCH_83_W, SKETCH_83_H)
    extrude(amount=-EXTRUDE_30_DEPTH)

    # 圓角1
    # the kernel refuses this fillet: 10 mm, written as the material it takes off along each edge
    with BuildSketch(Plane(origin=(3, -30.090254449, -23.559487474), x_dir=(-1, 0, 0), z_dir=(0, 1, 0))) as fillet_1_piece_1:
        with BuildLine():
            CenterArc((7.32210178, 10), FILLET_1_R, 222.927997508, 47.072002492)
            Line((0, 3.189212562), (-0.146442036, 3.052996813))
            ThreePointArc((-0.146442036, 3.052996813), (-0.2, 1.594606281), (-0.2, 0))
            Line((-0.2, 0), (0, -0.2))
            Line((0, -0.2), (7.32210178, -0.2))
            Line((7.32210178, -0.2), (7.32210178, 0))
        make_face()
    extrude(amount=59.576100059, mode=Mode.SUBTRACT)

    # 草圖84 → 填料-伸長31 (add)
    with BuildSketch(Plane(origin=(0, -11.785, 0), x_dir=(-1, 0, 0), z_dir=(0, -1, 0))):
        with Locations((12.85, 26.960780818)):
            Rectangle(SKETCH_84_W, SKETCH_84_H)
    extrude(amount=-EXTRUDE_31_DEPTH)

    # 草圖85 → 除料-伸長40 (cut, through all)
    with BuildSketch(Plane.XZ.offset(11.785)):
        with Locations((-12.85, -36.250780818)):
            Rectangle(SKETCH_85_W, SKETCH_85_H)
    extrude(amount=-CUT_EXTRUDE_40_DEPTH, mode=Mode.SUBTRACT)

    # 草圖86 → 填料-伸長32 (add)
    with BuildSketch(Plane.XY.offset(-17.410780818)):
        with Locations((-12.85, -0.30220442)):
            Rectangle(SKETCH_86_W, SKETCH_86_H)
    extrude(amount=EXTRUDE_32_DEPTH)

    # 草圖87 → 除料-伸長41 (cut)
    with BuildSketch(Plane.XZ.offset(11.785)):
        with Locations((-12.795744065, -0.002688243)):
            Rectangle(SKETCH_87_W, SKETCH_87_H)
    extrude(amount=-CUT_EXTRUDE_41_DEPTH, mode=Mode.SUBTRACT)


with BuildPart() as cut_extrude_41_piece_1:
    # of the separate pieces the step leaves, piece 1, a body of its own (cut_extrude_41_pieces)
    add(part_1.part.solids().sort_by_distance((3, 11.18059116, -20.370274912))[0])



with BuildPart() as cut_extrude_41_piece_2:
    # of the separate pieces the step leaves, piece 2, a body of its own (cut_extrude_41_pieces)
    add(part_1.part.solids().sort_by_distance((-11.1, 11.18059116, 17.405404333))[0])

    # 草圖89 → 填料-伸長33 (add)
    with BuildSketch(Plane.XZ.offset(11.785)):
        with Locations((-11.045744065, 20.485780818)):
            Rectangle(SKETCH_89_W, SKETCH_89_H)
    extrude(amount=-EXTRUDE_33_DEPTH)

    # 草圖90 → 填料-伸長34 (add)
    with BuildSketch(Plane.XY.offset(23.560780818)):
        Polygon((-11, 11.18059116), (-11.1, 11.18059116), (-11.1, -11.785), (-10.99148813, -11.785), (-10.99148813, 11.18059116), align=None)
    extrude(amount=EXTRUDE_34_DEPTH)

    # 草圖91 → 除料-伸長42 (cut)
    with BuildSketch(Plane.ZY.offset(11.1)):
        with Locations((45.175, -0.30220442)):
            Rectangle(SKETCH_91_W, SKETCH_91_H)
    extrude(amount=-CUT_EXTRUDE_42_DEPTH, mode=Mode.SUBTRACT)


with BuildPart() as cut_extrude_41_piece_1_1:
    add(cut_extrude_41_piece_1.part)

    add(cut_extrude_41_piece_2.part)  # 填料-伸長35 merges 除料-伸長41 piece 2
    # 草圖95 → 填料-伸長35 (add)
    with BuildSketch(Plane(origin=(-10.99148813, 0, 0), x_dir=(0, 0, -1), z_dir=(1, 0, 0))):
        with Locations((-20.485780818, -0.30220442)):
            Rectangle(SKETCH_95_W, SKETCH_95_H)
    extrude(amount=EXTRUDE_35_DEPTH)

    # 圓角2
    # the kernel refuses this fillet: 10 mm, written as the material it takes off along each edge
    with BuildSketch(Plane(origin=(3.10851187, -30.131013506, 23.560780818), x_dir=(-1, 0, 0), z_dir=(0, 1, 0))) as fillet_2_piece_1:
        with BuildLine():
            CenterArc((7.338405402, -10), FILLET_2_R, 90, 47.209333859)
            Line((0, -3.206782342), (-0.146768108, -3.070917989))
            ThreePointArc((-0.146768108, -3.070917989), (-0.2, -1.603391171), (-0.2, 0))
            Line((-0.2, 0), (0, 0.2))
            Line((0, 0.2), (7.338405402, 0.2))
            Line((7.338405402, 0.2), (7.338405402, 0))
        make_face()
    extrude(amount=59.657618171, mode=Mode.SUBTRACT)

    # 草圖96 → 除料-伸長43 (cut, through all)
    with BuildSketch(Plane.XZ.offset(11.785)):
        with Locations((-12.795744065, 43.415)):
            Rectangle(SKETCH_96_W, SKETCH_96_H)
    extrude(amount=-CUT_EXTRUDE_43_DEPTH, mode=Mode.SUBTRACT)

    # 草圖97 → 填料-伸長36 (add)
    with BuildSketch(Plane.XZ.offset(11.785)):
        with Locations((-12.85, -39.065134146)):
            Rectangle(SKETCH_97_W, SKETCH_97_H)
    extrude(amount=-EXTRUDE_36_DEPTH)

    # 草圖98 → 除料-伸長44 (cut)
    with BuildSketch(Plane(origin=(-11.1, 0, 0), x_dir=(0, 0, -1), z_dir=(1, 0, 0))):
        Polygon((17.410780818, 11.18059116), (17.410780818, 11.315), (22.198280677, 11.315), (38.461669752, 11.315), (42.139487474, 11.315), (42.139487474, 11.18059116), align=None)
    extrude(amount=-CUT_EXTRUDE_44_DEPTH, mode=Mode.SUBTRACT)

    # 草圖99 → 除料-伸長45 (cut)
    with BuildSketch(Plane(origin=(-10.99148813, 0, 0), x_dir=(0, 0, -1), z_dir=(1, 0, 0))):
        with Locations((-20.485780818, 11.24779558)):
            Rectangle(SKETCH_99_W, SKETCH_99_H)
    extrude(amount=-CUT_EXTRUDE_45_DEPTH, mode=Mode.SUBTRACT)

    # 草圖101 → 除料-伸長46 (cut)
    with BuildSketch(Plane(origin=(-10.99148813, 0, 0), x_dir=(0, 0, -1), z_dir=(1, 0, 0))):
        with Locations((-32.928668636, -0.30220442)):
            Circle(SKETCH_101_R)
        with Locations((32.849487474, -0.30220442)):
            Circle(SKETCH_101_R)
    extrude(amount=-CUT_EXTRUDE_46_DEPTH, mode=Mode.SUBTRACT)

    # 草圖103 → 除料-伸長49 (cut, through all)
    with BuildSketch(Plane(origin=(0, 11.18059116, 0), x_dir=(1, 0, 0), z_dir=(0, 1, 0))):
        with Locations((-12.795744065, -17.675404333)):
            Rectangle(SKETCH_103_W, SKETCH_103_H)
    extrude(amount=-CUT_EXTRUDE_49_DEPTH, mode=Mode.SUBTRACT)

    # 草圖104 → 除料-伸長50 (cut, through all)
    with BuildSketch(Plane(origin=(0, 11.18059116, 0), x_dir=(1, 0, 0), z_dir=(0, 1, 0))):
        with Locations((-12.795744065, 17.680780818)):
            Rectangle(SKETCH_104_W, SKETCH_104_H)
    extrude(amount=-CUT_EXTRUDE_50_DEPTH, mode=Mode.SUBTRACT)

    # 草圖105 → 填料-伸長37 (add)
    with BuildSketch(Plane.XY.offset(50)):
        with Locations((-3.94148813, -0.30220442)):
            Rectangle(SKETCH_105_W, SKETCH_105_H)
    extrude(amount=-EXTRUDE_37_DEPTH)

    # 草圖106 → 除料-伸長52 (cut, through all)
    with BuildSketch(Plane.ZY.offset(10.99148813)):
        with Locations((46.271085207, -0.30220442)):
            Rectangle(SKETCH_106_W, SKETCH_106_H)
    extrude(amount=-CUT_EXTRUDE_52_DEPTH, mode=Mode.SUBTRACT)

    # 草圖107 → 除料-伸長53 (cut, through all)
    with BuildSketch(Plane.ZY.offset(10.99148813)):
        with Locations(Location((32.928668636, -0.30220442, 0), (0, 0, 180))):
            Circle(SKETCH_107_R)
    extrude(amount=-CUT_EXTRUDE_53_DEPTH, mode=Mode.SUBTRACT)

    # 草圖108 → 填料-伸長38 (add)
    with BuildSketch(Plane(origin=(0, 0, 17.945404333), x_dir=(-1, 0, 0), z_dir=(0, 0, -1))):
        with Locations((12.795744065, -0.30220442)):
            Rectangle(SKETCH_108_W, SKETCH_108_H)
    extrude(amount=EXTRUDE_38_DEPTH)

    # 草圖109 → 填料-伸長39 (add)
    with BuildSketch(Plane.ZY.offset(14.6)):
        with Locations((0.000646672, -0.30220442)):
            Rectangle(SKETCH_109_W, SKETCH_109_H)
    extrude(amount=EXTRUDE_39_DEPTH)

    # 草圖110 → 除料-伸長54 (cut, through all)
    with BuildSketch(Plane(origin=(-14.6, 0, 0), x_dir=(0, 0, -1), z_dir=(1, 0, 0))):
        with Locations((32.849487474, -0.30220442)):
            Circle(SKETCH_110_R)
    extrude(amount=-CUT_EXTRUDE_54_DEPTH, mode=Mode.SUBTRACT)

    # 草圖111 → 除料-伸長55 (cut, through all)
    with BuildSketch(Plane(origin=(3.10851187, 0, 0), x_dir=(0, 0, -1), z_dir=(1, 0, 0))):
        with Locations((-32.928668636, -0.30220442)):
            Circle(SKETCH_111_R)
    extrude(amount=-CUT_EXTRUDE_55_DEPTH, mode=Mode.SUBTRACT)

    # 草圖112 → 除料-伸長56 (cut, through all)
    with BuildSketch(Plane(origin=(0, 11.18059116, 0), x_dir=(1, 0, 0), z_dir=(0, 1, 0))):
        Polygon((3.10851187, -20.353998476), (-8.730551994, -29.607339099), (-8.730551994, -42.140780818), (3.10851187, -42.140780818), align=None)
    extrude(amount=-CUT_EXTRUDE_56_DEPTH, mode=Mode.SUBTRACT)

    # 草圖113 → 填料-伸長40 (add)
    with BuildSketch(Plane.XZ.offset(11.785)):
        Polygon((3.10851187, 20.353998476), (-8.730551994, 29.607339099), (-8.730551994, 42.140780818), (-19.6, 42.140780818), (-19.6, 12.089639112), (3.10851187, 12.089639112), align=None)
    extrude(amount=EXTRUDE_40_DEPTH)

    # 草圖120 → 填料-伸長44 (add, two sides: drawn at the far end of the back side and taken through both)
    with BuildSketch(Plane.XY.offset(50).offset(-EXTRUDE_44_DEPTH_BACK)):
        with Locations((0.10851187, -20.185)):
            Circle(SKETCH_120_R)
    extrude(amount=EXTRUDE_44_DEPTH + EXTRUDE_44_DEPTH_BACK)

    # 草圖121 → 除料-伸長58 (cut, two sides: drawn at the far end of the back side and taken through both)
    with BuildSketch(Plane(origin=(0, 0, 0), x_dir=(1, 0, 0), z_dir=(0, 1, 0)).offset(-CUT_EXTRUDE_58_DEPTH_BACK)):
        with Locations((3.140291281, -47.603289382)):
            Rectangle(SKETCH_121_W, SKETCH_121_H)
    extrude(amount=CUT_EXTRUDE_58_DEPTH + CUT_EXTRUDE_58_DEPTH_BACK, mode=Mode.SUBTRACT)


solid = cut_extrude_41_piece_1_1.part
